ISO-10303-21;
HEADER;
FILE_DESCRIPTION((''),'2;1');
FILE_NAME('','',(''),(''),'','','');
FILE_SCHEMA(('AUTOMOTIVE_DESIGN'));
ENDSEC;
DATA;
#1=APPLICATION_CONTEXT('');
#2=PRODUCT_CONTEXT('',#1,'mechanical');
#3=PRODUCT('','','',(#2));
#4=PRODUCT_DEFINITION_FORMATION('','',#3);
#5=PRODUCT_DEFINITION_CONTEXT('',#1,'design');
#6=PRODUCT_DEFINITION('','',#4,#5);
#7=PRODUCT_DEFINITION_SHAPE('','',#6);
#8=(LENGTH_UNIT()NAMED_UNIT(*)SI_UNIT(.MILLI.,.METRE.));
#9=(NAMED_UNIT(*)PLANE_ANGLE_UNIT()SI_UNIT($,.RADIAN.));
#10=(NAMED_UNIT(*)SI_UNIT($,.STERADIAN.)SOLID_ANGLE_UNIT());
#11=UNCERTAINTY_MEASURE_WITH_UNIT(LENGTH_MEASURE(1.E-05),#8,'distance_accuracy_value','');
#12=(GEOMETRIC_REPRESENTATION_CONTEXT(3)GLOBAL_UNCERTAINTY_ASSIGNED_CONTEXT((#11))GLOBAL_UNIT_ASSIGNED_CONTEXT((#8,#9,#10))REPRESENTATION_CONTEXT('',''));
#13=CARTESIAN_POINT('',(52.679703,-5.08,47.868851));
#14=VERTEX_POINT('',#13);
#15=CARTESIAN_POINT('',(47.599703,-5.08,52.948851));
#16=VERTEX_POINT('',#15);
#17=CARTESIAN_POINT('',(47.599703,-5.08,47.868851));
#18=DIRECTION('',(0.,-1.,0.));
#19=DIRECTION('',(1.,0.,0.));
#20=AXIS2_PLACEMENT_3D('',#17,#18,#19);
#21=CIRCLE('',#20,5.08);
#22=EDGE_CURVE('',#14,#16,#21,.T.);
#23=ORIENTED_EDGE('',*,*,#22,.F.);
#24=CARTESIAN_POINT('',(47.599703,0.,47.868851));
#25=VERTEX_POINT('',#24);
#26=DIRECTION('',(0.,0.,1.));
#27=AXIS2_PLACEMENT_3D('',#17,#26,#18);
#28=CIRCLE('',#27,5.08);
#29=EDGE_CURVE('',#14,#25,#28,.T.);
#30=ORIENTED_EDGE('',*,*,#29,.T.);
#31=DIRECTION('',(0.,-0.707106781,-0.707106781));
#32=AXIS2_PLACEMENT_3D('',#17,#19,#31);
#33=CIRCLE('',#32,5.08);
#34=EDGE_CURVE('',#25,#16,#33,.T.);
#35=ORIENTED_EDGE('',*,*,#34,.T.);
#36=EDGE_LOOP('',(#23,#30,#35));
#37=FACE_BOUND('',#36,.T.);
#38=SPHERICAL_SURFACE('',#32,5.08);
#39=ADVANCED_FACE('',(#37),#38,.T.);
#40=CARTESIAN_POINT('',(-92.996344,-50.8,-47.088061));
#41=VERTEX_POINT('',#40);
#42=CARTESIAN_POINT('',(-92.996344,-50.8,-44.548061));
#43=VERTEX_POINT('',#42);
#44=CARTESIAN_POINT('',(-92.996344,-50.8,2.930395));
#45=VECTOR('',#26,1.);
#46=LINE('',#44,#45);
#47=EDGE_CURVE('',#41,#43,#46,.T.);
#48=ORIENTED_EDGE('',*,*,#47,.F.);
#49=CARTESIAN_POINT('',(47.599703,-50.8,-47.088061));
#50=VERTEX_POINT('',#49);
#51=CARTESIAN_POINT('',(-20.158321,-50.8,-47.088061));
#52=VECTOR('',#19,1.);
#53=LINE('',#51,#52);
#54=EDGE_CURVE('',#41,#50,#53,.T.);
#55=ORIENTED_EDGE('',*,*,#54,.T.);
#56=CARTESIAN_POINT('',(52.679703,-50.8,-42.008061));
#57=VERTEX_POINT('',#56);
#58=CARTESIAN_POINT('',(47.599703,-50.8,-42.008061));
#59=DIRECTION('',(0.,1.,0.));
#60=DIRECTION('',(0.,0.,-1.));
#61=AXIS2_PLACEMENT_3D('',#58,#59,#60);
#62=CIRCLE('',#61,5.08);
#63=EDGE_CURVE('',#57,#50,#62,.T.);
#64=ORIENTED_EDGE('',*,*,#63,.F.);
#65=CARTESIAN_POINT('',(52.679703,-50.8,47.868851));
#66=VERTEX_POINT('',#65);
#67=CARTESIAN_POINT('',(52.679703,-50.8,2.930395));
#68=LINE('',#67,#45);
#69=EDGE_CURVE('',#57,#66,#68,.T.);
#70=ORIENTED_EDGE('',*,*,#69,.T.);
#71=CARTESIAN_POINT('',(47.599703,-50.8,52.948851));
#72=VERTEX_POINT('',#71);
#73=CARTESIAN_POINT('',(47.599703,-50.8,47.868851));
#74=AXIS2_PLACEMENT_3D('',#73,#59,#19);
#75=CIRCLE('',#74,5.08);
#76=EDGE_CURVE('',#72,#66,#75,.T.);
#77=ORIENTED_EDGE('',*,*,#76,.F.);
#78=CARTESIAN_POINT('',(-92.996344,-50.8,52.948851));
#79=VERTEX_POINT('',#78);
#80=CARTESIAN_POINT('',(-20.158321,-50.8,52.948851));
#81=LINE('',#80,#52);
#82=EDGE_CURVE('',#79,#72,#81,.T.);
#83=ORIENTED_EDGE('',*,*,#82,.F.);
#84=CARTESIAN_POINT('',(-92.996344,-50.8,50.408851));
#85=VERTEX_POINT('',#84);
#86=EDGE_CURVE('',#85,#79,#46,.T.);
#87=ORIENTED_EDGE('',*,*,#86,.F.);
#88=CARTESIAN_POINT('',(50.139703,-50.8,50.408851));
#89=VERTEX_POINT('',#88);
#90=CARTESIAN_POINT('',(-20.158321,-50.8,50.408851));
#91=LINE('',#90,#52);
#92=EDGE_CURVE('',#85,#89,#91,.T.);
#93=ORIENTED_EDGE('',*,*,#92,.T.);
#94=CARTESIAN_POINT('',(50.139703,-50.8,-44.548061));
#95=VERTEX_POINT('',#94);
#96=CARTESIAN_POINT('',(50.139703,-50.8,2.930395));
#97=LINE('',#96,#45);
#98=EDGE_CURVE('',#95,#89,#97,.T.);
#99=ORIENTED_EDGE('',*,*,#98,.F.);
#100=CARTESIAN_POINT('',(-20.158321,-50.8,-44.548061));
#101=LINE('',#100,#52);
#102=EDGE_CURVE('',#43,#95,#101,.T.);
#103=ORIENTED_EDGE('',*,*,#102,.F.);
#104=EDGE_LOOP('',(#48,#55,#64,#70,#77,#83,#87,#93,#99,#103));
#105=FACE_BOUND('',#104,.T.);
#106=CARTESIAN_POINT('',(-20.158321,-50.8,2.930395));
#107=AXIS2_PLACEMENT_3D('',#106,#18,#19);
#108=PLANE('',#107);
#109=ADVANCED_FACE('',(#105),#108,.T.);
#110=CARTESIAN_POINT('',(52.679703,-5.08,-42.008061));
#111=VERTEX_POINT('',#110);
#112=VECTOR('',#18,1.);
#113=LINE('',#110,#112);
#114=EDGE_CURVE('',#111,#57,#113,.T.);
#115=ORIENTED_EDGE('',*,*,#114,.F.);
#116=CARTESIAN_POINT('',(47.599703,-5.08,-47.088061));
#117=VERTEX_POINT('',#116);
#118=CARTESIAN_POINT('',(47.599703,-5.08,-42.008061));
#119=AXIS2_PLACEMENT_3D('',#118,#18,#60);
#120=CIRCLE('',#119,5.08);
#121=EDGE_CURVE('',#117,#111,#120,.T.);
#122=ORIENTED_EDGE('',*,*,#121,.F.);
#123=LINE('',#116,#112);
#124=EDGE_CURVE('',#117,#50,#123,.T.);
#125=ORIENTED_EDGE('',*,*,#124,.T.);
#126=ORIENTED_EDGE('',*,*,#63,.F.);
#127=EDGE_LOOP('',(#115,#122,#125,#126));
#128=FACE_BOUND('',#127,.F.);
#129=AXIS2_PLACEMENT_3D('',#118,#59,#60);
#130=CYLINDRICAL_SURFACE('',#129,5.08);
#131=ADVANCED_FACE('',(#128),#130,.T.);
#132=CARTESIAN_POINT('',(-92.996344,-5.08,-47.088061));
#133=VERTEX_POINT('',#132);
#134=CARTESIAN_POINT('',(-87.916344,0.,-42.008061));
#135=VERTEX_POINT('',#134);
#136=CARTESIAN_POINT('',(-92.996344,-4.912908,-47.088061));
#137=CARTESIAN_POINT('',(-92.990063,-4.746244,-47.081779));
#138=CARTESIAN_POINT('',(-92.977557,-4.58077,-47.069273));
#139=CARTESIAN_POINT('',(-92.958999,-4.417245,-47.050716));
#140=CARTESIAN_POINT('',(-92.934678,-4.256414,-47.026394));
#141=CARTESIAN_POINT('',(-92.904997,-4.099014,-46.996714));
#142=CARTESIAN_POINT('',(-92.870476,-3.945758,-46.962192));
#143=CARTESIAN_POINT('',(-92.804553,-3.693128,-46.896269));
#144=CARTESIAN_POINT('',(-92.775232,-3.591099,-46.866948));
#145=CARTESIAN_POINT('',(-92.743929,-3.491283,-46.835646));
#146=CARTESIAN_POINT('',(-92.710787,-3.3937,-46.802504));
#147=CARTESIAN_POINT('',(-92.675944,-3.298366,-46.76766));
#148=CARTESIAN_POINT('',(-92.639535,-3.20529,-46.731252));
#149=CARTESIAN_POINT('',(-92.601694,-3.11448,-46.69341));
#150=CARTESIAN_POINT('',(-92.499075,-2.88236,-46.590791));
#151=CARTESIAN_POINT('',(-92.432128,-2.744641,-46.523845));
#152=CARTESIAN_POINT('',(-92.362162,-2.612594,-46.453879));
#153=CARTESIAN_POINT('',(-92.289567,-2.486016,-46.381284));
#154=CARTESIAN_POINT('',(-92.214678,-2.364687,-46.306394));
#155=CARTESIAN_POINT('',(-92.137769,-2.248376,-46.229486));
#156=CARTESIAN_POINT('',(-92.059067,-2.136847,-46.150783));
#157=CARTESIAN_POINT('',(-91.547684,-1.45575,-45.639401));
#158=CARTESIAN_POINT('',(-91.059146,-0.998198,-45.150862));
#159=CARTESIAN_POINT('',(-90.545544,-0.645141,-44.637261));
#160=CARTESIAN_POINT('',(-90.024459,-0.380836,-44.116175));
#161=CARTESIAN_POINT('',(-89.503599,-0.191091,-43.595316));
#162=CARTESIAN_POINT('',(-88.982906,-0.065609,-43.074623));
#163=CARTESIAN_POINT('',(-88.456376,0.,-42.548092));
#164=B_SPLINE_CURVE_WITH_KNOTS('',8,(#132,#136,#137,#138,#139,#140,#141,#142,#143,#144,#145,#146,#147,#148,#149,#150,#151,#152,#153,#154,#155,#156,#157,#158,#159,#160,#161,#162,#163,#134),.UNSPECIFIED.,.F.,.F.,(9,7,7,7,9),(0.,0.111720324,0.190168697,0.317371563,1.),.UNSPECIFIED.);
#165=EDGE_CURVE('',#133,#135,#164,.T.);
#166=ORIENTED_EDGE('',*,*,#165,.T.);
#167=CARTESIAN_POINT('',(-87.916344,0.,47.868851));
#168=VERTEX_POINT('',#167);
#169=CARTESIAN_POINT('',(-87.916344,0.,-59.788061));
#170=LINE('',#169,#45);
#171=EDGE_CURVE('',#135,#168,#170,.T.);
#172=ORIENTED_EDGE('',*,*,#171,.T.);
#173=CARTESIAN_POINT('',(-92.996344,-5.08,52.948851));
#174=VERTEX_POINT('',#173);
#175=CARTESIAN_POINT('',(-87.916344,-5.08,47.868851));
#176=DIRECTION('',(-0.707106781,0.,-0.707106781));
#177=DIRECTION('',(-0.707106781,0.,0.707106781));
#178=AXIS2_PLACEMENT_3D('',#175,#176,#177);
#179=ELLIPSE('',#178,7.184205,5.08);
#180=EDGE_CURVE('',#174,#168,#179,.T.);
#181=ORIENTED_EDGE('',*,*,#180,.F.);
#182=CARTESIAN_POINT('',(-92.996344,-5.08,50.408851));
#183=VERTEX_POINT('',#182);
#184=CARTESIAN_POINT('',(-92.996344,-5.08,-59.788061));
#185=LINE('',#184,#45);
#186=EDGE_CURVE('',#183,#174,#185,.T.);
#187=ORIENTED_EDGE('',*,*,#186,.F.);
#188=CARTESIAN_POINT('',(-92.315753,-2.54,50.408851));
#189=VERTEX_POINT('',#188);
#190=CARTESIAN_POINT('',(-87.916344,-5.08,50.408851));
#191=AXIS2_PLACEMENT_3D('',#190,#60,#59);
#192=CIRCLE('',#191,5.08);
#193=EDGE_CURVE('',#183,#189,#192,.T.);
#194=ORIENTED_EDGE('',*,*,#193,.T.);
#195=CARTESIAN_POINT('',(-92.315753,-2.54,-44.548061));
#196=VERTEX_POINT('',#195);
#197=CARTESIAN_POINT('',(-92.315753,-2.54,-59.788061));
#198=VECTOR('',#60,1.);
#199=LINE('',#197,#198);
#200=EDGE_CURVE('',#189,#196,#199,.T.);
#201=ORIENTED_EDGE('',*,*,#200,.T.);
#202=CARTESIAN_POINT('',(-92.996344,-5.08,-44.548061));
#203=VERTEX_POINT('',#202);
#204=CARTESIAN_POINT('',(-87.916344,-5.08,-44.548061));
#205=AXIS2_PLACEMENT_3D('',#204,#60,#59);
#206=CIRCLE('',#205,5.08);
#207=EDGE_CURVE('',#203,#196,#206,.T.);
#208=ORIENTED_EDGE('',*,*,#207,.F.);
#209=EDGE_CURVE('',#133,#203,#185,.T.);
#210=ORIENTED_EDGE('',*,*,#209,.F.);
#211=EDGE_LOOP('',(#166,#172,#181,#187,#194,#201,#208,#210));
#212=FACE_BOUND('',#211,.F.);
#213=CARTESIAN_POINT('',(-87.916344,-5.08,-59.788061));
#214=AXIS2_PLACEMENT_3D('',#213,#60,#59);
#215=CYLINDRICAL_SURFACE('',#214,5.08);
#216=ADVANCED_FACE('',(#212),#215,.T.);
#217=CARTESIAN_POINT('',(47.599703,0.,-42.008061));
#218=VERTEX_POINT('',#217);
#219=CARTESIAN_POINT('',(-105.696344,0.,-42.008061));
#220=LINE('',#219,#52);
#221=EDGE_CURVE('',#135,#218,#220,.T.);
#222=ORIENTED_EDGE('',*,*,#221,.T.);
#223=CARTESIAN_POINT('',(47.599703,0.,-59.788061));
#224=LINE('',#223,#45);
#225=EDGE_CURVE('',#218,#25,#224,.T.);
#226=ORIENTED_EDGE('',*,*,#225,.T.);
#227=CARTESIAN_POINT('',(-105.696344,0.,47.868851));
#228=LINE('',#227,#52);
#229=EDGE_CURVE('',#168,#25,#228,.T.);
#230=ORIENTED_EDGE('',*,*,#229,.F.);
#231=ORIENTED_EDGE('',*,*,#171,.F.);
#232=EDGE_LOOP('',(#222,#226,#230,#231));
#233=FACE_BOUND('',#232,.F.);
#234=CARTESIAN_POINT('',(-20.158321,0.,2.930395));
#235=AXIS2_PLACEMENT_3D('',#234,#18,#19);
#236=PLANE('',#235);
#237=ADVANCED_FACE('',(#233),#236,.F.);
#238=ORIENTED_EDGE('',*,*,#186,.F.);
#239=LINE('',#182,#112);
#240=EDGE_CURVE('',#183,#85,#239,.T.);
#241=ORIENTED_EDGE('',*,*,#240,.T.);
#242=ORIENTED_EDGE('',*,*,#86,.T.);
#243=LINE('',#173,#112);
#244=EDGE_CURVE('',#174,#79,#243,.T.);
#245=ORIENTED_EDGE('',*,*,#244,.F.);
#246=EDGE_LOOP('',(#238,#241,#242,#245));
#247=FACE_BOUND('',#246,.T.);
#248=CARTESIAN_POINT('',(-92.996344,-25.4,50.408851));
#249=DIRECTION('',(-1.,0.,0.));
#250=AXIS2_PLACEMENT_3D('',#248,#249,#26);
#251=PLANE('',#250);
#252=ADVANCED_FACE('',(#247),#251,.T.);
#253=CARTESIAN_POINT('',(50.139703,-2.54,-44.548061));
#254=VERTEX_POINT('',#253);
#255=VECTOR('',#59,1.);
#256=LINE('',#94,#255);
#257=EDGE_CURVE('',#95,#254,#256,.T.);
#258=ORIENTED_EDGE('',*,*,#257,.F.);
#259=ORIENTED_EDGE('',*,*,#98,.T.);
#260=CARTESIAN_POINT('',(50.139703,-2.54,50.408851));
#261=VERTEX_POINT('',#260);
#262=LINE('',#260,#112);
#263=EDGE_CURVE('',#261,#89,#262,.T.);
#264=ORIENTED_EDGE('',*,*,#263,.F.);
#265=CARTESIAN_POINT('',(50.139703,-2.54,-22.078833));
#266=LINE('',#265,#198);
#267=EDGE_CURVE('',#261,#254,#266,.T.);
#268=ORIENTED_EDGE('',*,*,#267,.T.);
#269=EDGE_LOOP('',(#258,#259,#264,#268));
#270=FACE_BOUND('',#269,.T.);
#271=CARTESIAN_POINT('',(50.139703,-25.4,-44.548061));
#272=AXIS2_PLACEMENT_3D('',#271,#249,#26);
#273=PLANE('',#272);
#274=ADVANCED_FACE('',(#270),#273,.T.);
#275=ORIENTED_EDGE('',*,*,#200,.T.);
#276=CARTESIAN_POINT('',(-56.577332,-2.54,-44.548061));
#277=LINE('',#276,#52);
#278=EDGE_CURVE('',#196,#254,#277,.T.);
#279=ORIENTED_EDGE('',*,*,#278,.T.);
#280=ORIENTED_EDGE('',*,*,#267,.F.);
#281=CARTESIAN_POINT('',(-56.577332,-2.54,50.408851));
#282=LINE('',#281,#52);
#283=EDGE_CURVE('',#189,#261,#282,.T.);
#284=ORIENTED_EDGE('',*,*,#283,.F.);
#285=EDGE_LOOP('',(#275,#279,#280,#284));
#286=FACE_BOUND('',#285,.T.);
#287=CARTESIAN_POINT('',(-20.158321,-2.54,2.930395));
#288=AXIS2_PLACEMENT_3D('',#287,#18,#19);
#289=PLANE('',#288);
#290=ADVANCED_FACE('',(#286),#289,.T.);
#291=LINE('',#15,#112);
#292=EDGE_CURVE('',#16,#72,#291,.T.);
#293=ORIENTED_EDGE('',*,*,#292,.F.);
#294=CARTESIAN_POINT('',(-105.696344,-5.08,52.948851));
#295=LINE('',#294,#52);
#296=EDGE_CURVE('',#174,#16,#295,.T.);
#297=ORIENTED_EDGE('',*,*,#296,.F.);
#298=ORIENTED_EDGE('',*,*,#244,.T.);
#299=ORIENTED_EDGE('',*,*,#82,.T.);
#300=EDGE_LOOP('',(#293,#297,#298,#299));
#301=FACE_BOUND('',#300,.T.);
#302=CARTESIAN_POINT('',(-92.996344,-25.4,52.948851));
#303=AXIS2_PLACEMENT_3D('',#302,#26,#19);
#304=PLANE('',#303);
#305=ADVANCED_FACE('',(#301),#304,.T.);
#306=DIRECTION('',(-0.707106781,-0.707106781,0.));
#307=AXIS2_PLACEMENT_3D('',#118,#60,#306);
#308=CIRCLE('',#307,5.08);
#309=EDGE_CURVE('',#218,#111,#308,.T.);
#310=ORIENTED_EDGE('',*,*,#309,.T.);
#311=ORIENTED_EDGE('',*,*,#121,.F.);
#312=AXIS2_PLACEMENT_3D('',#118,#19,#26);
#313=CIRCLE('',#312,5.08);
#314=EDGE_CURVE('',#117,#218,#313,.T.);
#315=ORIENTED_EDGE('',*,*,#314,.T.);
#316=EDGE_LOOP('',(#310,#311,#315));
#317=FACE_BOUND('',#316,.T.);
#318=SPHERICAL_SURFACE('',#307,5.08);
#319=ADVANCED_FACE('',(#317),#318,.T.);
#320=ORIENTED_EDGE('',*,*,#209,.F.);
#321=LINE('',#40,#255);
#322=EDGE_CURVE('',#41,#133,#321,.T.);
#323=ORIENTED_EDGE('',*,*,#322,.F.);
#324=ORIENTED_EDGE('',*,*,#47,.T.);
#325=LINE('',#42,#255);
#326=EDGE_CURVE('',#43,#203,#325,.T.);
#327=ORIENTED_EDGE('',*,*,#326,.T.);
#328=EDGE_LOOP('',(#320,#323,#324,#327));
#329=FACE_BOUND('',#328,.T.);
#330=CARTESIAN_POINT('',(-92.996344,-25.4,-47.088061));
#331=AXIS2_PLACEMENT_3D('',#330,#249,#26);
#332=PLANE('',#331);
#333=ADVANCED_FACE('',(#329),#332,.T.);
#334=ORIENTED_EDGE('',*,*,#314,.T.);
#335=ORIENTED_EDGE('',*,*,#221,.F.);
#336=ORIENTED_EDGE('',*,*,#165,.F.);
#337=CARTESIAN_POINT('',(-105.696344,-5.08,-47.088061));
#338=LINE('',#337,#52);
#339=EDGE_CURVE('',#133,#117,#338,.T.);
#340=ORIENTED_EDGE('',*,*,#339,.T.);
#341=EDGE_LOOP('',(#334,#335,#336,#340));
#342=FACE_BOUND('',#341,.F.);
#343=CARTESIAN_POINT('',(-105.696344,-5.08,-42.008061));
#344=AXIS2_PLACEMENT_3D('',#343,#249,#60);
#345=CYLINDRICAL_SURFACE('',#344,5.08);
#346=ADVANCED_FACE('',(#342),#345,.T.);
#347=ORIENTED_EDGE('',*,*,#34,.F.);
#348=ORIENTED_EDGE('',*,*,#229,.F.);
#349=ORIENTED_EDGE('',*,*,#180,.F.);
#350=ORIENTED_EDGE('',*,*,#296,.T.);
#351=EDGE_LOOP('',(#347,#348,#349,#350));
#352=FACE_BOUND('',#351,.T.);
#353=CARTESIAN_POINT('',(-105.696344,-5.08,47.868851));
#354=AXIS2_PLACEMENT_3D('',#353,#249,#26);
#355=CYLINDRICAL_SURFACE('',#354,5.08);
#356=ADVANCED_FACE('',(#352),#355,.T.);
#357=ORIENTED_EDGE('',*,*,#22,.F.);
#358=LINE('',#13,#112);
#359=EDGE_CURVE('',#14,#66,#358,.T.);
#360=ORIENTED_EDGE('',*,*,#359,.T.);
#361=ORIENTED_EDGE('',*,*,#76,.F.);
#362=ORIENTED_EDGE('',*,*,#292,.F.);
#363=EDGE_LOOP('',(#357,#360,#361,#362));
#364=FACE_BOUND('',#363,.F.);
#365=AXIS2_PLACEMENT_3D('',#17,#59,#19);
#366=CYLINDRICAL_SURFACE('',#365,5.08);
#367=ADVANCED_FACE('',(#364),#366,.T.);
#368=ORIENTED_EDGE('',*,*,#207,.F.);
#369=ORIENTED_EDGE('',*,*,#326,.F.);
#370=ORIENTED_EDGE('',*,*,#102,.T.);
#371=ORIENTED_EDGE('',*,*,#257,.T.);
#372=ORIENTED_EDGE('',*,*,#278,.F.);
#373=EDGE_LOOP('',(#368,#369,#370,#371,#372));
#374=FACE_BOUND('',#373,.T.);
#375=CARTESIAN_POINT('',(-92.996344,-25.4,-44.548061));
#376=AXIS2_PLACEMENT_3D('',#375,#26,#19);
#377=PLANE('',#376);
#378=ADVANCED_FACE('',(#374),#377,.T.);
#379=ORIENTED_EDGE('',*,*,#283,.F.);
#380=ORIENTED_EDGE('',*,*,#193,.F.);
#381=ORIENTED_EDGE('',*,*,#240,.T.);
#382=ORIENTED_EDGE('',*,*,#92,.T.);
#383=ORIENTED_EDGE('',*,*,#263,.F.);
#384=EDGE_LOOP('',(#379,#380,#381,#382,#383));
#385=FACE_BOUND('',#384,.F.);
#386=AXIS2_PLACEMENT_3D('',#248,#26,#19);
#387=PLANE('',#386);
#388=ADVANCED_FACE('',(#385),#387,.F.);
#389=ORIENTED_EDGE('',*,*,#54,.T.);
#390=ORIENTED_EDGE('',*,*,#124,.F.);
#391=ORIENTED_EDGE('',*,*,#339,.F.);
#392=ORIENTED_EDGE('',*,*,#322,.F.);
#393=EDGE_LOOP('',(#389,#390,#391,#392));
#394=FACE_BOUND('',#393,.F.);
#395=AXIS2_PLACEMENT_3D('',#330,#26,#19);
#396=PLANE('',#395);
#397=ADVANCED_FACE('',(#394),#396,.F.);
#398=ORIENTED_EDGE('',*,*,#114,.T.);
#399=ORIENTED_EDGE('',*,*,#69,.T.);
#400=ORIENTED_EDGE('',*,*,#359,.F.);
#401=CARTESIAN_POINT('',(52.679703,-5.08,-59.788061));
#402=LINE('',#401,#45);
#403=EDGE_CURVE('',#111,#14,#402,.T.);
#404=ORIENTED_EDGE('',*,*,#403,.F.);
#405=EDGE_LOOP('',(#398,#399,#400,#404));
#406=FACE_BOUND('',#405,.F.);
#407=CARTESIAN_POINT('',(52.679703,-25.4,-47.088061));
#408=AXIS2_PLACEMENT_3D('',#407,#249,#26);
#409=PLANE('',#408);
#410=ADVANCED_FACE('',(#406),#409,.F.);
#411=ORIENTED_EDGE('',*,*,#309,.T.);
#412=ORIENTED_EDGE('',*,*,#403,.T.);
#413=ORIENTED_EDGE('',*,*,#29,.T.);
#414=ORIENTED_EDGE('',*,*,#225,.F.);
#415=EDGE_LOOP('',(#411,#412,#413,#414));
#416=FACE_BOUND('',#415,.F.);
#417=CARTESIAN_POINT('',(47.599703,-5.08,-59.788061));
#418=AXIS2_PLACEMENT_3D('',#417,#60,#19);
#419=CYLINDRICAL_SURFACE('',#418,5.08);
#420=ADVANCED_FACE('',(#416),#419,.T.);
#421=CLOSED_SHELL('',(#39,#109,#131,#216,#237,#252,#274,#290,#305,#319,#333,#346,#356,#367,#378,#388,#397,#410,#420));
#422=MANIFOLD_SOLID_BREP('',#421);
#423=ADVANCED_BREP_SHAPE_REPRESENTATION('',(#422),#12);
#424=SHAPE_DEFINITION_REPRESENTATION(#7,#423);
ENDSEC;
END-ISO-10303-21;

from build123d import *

# Parameters (mm, degrees)
F0_W         = 145.6760466099
F0_H         = 100.0369116664
F0_W_2       = 138.8105116785
F0_H_2       = 92.9268449545
F1_DEPTH     = 25.4
F2_T         = -2.54
F3_T1_DEPTH  = 171.0760466099
F3_T3_DEPTH  = 125.4369116664
F4_DEPTH     = 25.4
F5_T1_DEPTH  = 58.42
F5_S5_W      = 5.08
F5_S5_H      = 5.08
F5_T6_DEPTH  = 5.08
F5_S11_W     = 5.08
F5_S11_H     = 5.08
F5_T12_DEPTH = 5.08


# Not quite as in the source:
# - a fillet or chamfer that OpenCascade refuses, or shapes differently, is made with other operations: its cross-section is extruded or revolved along the edge and cut away or added


with BuildPart() as f1:
    # F0 (on Front) → F1 (new body)
    with BuildSketch(Plane.XZ):
        with Locations((-20.1583206654, 2.9303953052)):
            Rectangle(F0_W, F0_H)
        with Locations((-20.7056272775, 3.0381605029)):
            Rectangle(F0_W_2, F0_H_2, mode=Mode.SUBTRACT)
        with Locations((-20.7056272775, 3.0381605029)):
            Rectangle(F0_W_2, F0_H_2)
    extrude(amount=F1_DEPTH)

    # F2
    f2_openings = [f1.faces().sort_by_distance(p)[0] for p in [
        (-20.158321, -25.4, 2.930395),
        (-92.996344, -12.7, 2.930395),
    ]]
    offset(amount=F2_T, openings=f2_openings)

    # F3: fillet of radius 5.08 on 4 edges, made by hand

    # F3_s2 → F3_t1 (cut)
    with BuildSketch(Plane.YZ.offset(-105.6963439703)):
        with BuildLine():
            ThreePointArc((-5.08, 52.9488511384), (-1.4878975516, 51.4609535868), (0, 47.8688511384))
            Line((0, 47.8688511384), (0, 52.9488511384))
            Line((0, 52.9488511384), (-5.08, 52.9488511384))
        make_face()
        with BuildLine():
            ThreePointArc((-5.08, -47.088060528), (-1.4878975516, -45.6001629765), (0, -42.008060528))
            Line((0, -42.008060528), (0, -47.088060528))
            Line((0, -47.088060528), (-5.08, -47.088060528))
        make_face()
    extrude(amount=F3_T1_DEPTH, mode=Mode.SUBTRACT)

    # F3_s4 → F3_t3 (cut)
    with BuildSketch(Plane.XY.offset(-59.788060528)):
        with BuildLine():
            ThreePointArc((-87.9163439703, 0), (-91.5084464187, -1.4878975516), (-92.9963439703, -5.08))
            Line((-92.9963439703, -5.08), (-92.9963439703, 0))
            Line((-92.9963439703, 0), (-87.9163439703, 0))
        make_face()
        with BuildLine():
            ThreePointArc((52.6797026396, -5.08), (51.191805088, -1.4878975516), (47.5997026396, 0))
            Line((47.5997026396, 0), (52.6797026396, 0))
            Line((52.6797026396, 0), (52.6797026396, -5.08))
        make_face()
    extrude(amount=F3_T3_DEPTH, mode=Mode.SUBTRACT)

    # F4 (add): a face of the model
    f4_faces = [f1.faces().sort_by_distance(p)[0] for p in [
        (-20.1583206654, -25.4, 51.1816812469),
    ]]
    extrude(f4_faces, amount=F4_DEPTH)

    # F5: fillet of radius 5.08 on 2 edges, made by hand

    # F5_s2 → F5_t1 (cut)
    with BuildSketch(Plane.XZ.offset(5.08)):
        with BuildLine():
            ThreePointArc((52.6797026396, 47.8688511384), (51.191805088, 51.4609535868), (47.5997026396, 52.9488511384))
            Line((47.5997026396, 52.9488511384), (52.6797026396, 52.9488511384))
            Line((52.6797026396, 52.9488511384), (52.6797026396, 47.8688511384))
        make_face()
        with BuildLine():
            ThreePointArc((47.5997026396, -47.088060528), (51.191805088, -45.6001629765), (52.6797026396, -42.008060528))
            Line((52.6797026396, -42.008060528), (52.6797026396, -47.088060528))
            Line((52.6797026396, -47.088060528), (47.5997026396, -47.088060528))
        make_face()
    extrude(amount=F5_T1_DEPTH, mode=Mode.SUBTRACT)


with BuildPart() as f5_tool4:
    # F5_s5 → F5_t6 (new body)
    with BuildSketch(Plane.XY.offset(-42.008060528)):
        with Locations((50.1397026396, -2.54)):
            Rectangle(F5_S5_W, F5_S5_H)
    extrude(amount=-F5_T6_DEPTH)

    # F5_s7 → F5_t8 (revolve, cut)
    with BuildSketch(Plane(origin=(47.5997026396, -5.08, -42.008060528), x_dir=(-0.7071067812, -0.7071067812, 0), z_dir=(0.7071067812, -0.7071067812, 0))):
        with BuildLine():
            ThreePointArc((0, -5.08), (5.08, 0), (0, 5.08))
            Line((0, 5.08), (0, -5.08))
        make_face()
    revolve(axis=Axis((47.5997026396, -5.08, -42.008060528), (0, 0, -1)), mode=Mode.SUBTRACT)


with BuildPart() as f1_1:
    add(f1.part)

    # F5_t3: cut F5_tool4
    add(f5_tool4.part, mode=Mode.SUBTRACT)


with BuildPart() as f5_tool10:
    # F5_s11 → F5_t12 (new body)
    with BuildSketch(Plane.YZ.offset(47.5997026396)):
        with Locations((-2.54, 50.4088511384)):
            Rectangle(F5_S11_W, F5_S11_H)
    extrude(amount=F5_T12_DEPTH)

    # F5_s13 → F5_t14 (revolve, cut)
    with BuildSketch(Plane(origin=(47.5997026396, -5.08, 47.8688511384), x_dir=(0, -0.7071067812, -0.7071067812), z_dir=(0, -0.7071067812, 0.7071067812))):
        with BuildLine():
            ThreePointArc((0, -5.08), (5.08, 0), (0, 5.08))
            Line((0, 5.08), (0, -5.08))
        make_face()
    revolve(axis=Axis((47.5997026396, -5.08, 47.8688511384), (1, 0, 0)), mode=Mode.SUBTRACT)


with BuildPart() as f1_2:
    add(f1_1.part)

    # F5_t9: cut F5_tool10
    add(f5_tool10.part, mode=Mode.SUBTRACT)


solid = f1_2.part
